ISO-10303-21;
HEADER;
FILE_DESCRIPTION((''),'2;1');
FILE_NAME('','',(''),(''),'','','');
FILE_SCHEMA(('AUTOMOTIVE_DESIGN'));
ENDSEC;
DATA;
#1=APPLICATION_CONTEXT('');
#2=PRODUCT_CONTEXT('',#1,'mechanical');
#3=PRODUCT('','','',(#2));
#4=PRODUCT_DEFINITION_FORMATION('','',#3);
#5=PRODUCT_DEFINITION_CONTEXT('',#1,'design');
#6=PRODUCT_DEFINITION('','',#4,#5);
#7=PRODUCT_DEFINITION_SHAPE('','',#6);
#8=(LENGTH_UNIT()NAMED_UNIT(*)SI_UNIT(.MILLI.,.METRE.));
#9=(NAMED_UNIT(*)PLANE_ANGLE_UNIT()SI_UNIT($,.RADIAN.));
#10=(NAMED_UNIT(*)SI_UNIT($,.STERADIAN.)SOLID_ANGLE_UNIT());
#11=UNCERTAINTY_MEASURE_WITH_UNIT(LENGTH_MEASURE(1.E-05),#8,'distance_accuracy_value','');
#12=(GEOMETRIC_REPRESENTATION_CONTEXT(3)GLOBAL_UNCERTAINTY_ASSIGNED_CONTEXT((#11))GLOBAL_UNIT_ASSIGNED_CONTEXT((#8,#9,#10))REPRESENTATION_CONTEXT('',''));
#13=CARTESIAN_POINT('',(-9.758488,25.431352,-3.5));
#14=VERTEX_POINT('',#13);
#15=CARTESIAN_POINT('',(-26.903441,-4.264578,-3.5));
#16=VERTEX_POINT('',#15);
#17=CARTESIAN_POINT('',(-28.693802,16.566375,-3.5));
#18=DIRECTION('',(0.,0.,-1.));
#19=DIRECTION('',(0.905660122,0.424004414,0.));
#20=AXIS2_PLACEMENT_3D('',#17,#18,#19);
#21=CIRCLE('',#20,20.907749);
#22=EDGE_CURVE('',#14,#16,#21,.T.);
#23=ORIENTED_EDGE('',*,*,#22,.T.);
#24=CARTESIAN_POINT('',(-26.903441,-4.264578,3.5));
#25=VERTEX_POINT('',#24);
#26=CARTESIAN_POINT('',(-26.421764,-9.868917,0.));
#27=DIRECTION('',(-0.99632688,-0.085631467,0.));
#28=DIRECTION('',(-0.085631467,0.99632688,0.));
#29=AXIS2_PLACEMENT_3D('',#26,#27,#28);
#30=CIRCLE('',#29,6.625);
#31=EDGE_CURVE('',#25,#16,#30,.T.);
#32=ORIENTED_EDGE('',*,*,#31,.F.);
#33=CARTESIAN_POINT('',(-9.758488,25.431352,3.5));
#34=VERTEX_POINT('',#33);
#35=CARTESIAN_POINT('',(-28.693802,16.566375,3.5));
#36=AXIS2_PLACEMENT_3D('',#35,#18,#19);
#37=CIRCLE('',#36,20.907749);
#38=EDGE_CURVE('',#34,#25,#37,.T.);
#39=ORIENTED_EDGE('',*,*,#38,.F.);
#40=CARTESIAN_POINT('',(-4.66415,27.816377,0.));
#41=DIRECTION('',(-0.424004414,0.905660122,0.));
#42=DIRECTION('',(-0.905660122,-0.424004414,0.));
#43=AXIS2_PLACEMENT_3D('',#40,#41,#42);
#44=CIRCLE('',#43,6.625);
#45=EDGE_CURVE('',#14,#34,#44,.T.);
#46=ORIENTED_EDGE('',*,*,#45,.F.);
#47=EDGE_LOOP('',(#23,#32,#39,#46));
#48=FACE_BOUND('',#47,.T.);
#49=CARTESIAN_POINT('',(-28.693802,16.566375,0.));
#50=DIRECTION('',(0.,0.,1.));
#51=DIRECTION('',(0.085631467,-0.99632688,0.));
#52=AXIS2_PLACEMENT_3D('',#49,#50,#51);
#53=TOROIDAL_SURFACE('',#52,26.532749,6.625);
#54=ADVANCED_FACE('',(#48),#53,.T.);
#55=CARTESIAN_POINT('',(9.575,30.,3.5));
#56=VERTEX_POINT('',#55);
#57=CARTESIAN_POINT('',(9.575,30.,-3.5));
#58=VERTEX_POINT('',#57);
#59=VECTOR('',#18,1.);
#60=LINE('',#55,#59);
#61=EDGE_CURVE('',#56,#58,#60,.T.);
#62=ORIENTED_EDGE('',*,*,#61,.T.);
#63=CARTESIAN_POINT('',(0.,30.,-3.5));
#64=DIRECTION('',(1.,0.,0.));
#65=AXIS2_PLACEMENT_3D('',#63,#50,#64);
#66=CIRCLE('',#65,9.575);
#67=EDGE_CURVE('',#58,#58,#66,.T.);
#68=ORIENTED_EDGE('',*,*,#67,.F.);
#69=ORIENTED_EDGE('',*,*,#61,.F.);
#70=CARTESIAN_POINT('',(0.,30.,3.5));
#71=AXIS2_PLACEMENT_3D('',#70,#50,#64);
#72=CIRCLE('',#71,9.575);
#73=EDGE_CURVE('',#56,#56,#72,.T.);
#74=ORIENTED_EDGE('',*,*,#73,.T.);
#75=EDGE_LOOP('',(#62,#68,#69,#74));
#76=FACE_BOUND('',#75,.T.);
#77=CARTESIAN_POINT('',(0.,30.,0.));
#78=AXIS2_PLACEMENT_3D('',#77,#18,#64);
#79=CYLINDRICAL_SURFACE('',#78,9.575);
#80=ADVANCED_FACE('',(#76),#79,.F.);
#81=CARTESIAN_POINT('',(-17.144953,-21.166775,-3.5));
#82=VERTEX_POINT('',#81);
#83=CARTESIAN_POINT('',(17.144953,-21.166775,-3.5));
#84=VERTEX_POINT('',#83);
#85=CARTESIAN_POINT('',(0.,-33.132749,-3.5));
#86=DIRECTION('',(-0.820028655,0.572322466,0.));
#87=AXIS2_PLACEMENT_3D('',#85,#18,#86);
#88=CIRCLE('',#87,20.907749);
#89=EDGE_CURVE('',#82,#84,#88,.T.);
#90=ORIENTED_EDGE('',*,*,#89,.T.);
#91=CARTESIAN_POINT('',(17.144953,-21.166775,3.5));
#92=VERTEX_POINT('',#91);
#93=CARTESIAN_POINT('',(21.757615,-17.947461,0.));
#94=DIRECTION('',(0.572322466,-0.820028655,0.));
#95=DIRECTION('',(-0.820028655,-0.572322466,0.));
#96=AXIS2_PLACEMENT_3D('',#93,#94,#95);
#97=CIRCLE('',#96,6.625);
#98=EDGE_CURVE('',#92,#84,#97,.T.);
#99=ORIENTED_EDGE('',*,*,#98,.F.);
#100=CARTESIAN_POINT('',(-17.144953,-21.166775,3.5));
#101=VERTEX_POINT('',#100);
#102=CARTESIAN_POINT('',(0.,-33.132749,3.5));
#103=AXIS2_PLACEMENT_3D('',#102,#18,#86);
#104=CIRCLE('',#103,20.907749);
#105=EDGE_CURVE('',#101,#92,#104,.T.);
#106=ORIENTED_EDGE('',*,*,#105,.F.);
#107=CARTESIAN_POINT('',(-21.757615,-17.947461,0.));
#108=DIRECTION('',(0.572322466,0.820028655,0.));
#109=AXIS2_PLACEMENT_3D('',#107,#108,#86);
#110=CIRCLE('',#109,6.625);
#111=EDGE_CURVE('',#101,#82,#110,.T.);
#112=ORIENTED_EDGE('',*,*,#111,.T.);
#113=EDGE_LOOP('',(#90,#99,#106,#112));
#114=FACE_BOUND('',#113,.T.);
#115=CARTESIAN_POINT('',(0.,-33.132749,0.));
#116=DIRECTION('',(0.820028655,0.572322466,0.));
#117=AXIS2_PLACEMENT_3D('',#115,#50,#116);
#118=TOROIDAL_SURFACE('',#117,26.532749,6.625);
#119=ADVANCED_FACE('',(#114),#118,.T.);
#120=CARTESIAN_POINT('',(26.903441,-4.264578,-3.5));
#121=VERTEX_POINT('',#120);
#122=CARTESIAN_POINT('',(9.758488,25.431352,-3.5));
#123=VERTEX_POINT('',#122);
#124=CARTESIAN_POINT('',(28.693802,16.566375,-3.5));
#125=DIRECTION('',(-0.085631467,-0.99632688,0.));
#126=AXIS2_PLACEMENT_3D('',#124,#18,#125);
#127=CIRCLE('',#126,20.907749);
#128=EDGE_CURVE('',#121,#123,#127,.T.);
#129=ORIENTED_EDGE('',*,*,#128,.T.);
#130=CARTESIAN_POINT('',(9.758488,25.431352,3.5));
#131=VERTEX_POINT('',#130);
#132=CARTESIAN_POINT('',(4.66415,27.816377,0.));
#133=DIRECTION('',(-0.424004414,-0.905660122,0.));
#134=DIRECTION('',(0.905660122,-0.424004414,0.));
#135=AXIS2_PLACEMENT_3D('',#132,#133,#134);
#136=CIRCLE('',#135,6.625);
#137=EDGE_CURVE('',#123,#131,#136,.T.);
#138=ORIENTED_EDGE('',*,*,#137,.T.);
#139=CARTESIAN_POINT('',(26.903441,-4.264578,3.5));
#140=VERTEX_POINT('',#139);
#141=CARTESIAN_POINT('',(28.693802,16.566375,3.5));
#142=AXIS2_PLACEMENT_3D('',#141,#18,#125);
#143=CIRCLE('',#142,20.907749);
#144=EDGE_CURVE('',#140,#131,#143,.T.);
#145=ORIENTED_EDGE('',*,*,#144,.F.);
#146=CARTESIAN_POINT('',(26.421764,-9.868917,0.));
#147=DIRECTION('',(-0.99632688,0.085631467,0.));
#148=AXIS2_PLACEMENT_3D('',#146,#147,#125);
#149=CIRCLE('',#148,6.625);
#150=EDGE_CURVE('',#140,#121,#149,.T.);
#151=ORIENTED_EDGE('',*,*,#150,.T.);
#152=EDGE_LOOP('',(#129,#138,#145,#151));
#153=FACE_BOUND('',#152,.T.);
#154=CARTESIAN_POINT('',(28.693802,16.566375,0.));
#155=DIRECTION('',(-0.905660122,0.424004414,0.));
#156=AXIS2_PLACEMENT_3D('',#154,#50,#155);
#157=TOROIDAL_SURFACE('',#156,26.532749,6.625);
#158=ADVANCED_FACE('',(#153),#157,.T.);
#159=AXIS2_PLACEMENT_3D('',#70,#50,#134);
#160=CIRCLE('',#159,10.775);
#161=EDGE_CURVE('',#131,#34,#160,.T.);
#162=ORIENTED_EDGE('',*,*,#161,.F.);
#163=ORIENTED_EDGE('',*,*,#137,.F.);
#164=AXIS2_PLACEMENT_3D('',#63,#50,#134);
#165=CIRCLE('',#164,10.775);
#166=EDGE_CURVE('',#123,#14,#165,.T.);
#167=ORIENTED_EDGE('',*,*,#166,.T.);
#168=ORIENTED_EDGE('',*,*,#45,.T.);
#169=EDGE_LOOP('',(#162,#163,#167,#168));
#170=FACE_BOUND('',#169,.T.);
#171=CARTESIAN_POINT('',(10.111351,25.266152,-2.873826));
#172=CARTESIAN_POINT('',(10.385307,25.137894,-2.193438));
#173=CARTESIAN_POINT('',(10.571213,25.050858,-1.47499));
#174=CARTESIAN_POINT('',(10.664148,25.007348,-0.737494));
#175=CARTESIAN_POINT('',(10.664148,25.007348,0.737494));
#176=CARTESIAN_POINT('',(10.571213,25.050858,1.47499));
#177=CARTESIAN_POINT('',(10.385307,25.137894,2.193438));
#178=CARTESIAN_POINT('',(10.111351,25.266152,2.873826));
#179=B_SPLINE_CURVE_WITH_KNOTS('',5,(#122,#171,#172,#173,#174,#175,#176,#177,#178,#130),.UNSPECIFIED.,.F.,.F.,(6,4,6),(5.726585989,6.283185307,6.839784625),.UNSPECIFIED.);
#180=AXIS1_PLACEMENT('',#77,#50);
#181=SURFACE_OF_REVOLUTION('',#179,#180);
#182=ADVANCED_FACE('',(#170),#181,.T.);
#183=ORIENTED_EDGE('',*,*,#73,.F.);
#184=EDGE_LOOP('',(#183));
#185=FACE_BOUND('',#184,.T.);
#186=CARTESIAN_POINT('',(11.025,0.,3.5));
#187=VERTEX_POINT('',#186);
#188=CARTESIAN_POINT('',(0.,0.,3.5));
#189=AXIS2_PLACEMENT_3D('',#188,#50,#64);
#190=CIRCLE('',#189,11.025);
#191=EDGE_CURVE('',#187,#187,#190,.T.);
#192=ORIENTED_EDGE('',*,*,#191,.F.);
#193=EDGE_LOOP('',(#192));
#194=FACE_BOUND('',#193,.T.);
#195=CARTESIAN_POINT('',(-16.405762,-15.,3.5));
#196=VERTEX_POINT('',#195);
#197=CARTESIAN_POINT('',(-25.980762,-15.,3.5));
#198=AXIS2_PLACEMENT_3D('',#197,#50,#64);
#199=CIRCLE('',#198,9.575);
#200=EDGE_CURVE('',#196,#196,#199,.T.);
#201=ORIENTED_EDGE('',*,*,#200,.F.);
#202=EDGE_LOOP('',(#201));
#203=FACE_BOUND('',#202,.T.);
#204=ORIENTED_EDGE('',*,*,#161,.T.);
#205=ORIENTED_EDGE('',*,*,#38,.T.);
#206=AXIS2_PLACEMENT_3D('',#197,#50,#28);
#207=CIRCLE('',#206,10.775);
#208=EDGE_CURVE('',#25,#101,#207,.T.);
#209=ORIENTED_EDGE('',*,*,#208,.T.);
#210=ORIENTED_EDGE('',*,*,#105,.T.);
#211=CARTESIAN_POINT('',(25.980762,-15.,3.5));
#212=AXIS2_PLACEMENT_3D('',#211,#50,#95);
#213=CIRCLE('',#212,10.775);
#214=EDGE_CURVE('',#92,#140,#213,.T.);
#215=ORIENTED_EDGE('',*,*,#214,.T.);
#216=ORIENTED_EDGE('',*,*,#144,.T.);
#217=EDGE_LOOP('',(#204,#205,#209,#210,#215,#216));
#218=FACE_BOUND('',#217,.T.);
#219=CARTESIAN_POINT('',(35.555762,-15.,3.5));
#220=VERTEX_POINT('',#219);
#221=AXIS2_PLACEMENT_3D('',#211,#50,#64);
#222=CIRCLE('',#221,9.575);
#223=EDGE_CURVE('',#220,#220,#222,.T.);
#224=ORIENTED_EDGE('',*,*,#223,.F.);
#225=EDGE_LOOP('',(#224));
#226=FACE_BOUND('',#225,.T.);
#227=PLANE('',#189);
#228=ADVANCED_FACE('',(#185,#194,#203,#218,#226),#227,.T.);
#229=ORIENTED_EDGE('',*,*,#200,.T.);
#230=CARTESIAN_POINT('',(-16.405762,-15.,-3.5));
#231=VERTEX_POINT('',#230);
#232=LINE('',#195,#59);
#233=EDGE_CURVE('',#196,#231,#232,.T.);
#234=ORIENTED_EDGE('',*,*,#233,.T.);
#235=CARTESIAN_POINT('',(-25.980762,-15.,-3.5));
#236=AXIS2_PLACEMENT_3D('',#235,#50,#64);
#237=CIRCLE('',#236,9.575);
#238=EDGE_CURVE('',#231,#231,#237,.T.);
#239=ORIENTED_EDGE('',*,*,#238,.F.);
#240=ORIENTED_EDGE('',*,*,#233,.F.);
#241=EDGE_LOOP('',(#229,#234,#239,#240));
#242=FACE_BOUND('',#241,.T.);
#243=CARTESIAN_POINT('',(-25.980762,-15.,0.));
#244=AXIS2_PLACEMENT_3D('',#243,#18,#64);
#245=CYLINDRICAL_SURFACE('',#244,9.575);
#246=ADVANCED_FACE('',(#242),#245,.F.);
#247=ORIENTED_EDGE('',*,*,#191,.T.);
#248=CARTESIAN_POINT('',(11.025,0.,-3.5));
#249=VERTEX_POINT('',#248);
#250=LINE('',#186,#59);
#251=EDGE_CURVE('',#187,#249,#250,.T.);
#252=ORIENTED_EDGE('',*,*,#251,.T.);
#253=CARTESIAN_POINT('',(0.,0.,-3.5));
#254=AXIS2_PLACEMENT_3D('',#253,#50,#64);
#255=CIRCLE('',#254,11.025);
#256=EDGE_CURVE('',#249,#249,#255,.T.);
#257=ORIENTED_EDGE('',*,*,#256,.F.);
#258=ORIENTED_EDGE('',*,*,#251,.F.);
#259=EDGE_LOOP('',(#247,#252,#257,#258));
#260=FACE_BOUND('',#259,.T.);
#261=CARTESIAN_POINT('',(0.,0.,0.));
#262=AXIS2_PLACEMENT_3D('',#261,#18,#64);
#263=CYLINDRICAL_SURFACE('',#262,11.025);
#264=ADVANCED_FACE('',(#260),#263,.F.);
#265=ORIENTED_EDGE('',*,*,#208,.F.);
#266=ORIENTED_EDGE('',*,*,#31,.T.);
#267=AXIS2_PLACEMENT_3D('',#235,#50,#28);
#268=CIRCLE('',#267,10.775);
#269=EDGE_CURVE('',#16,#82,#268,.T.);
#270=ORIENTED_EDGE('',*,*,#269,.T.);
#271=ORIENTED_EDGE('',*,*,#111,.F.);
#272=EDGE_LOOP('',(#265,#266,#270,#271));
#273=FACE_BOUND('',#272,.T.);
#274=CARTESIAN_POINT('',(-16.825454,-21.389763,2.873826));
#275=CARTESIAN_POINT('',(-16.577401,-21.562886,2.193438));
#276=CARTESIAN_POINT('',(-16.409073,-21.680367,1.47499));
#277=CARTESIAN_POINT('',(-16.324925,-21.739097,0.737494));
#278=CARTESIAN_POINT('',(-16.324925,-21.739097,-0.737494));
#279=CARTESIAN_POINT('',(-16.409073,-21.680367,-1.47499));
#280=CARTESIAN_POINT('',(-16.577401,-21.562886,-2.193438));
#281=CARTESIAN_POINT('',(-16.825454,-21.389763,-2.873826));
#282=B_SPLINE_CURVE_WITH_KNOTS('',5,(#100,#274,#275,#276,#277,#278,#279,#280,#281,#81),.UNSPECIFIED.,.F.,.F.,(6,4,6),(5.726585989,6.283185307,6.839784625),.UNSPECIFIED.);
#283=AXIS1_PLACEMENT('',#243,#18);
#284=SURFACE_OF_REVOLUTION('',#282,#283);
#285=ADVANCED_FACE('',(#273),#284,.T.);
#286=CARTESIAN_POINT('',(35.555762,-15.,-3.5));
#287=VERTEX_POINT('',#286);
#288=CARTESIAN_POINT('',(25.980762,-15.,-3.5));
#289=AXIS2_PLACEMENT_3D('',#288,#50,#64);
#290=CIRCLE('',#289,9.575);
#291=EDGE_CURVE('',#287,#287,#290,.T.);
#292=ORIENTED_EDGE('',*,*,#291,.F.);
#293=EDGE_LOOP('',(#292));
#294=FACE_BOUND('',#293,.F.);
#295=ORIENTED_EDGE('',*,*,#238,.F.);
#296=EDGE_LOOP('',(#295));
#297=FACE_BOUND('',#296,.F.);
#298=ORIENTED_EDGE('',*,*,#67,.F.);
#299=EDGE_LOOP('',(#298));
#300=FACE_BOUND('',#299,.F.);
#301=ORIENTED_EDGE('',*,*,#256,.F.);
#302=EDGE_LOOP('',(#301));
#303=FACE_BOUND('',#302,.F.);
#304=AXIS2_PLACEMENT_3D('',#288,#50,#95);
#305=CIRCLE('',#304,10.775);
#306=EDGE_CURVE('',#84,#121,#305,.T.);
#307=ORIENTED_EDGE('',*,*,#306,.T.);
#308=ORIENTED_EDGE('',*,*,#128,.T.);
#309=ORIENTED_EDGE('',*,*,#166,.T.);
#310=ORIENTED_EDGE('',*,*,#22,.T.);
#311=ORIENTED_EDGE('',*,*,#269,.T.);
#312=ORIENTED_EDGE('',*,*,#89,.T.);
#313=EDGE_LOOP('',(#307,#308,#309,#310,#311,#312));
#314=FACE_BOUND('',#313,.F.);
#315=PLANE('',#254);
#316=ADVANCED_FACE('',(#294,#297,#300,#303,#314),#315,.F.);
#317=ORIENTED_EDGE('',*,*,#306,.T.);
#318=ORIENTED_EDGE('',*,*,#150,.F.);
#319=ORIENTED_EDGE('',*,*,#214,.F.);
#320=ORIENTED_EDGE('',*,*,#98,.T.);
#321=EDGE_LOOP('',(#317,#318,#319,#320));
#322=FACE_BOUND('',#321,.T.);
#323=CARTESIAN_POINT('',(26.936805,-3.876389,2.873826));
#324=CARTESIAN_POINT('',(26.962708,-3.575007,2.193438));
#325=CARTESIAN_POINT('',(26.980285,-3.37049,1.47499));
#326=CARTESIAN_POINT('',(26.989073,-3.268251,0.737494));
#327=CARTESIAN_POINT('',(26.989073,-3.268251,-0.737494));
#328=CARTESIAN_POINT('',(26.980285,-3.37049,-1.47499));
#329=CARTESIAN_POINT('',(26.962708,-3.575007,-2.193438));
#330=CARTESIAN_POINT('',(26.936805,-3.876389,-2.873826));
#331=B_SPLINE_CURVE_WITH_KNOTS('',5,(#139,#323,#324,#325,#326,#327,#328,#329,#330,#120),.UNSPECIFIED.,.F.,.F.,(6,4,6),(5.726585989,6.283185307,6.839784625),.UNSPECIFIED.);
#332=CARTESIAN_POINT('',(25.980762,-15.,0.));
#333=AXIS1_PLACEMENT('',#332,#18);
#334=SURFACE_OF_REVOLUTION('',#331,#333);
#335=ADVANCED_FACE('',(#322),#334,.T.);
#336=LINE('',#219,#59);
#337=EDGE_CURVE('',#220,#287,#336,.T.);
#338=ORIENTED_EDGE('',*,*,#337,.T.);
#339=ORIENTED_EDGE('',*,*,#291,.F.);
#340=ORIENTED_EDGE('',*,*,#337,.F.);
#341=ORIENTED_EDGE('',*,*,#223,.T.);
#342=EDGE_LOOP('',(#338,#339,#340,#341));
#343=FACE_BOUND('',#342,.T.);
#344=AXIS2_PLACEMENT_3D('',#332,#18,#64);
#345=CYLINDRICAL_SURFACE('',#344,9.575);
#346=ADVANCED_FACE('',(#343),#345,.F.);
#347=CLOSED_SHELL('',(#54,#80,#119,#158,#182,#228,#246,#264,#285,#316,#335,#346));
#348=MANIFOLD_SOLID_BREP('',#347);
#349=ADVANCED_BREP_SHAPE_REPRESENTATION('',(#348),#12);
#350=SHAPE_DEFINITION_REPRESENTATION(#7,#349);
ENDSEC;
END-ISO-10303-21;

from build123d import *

# Parameters (mm, degrees)
F0_R     = 9.575
F0_R_2   = 11.025
F1_DEPTH = 3.5


# Not quite as in the source:
# - a feature names something its author has since deleted; it is built from what else it names


with BuildPart() as f1:
    # F0 (on Top) → F1 (new body, symmetric)
    with BuildSketch(Plane.XY):
        with BuildLine():
            ThreePointArc((-9.7584878157, 25.4313524375), (-10.5871605613, 6.1125), (-26.9034411714, -4.2645778678))
            ThreePointArc((-26.9034411714, -4.2645778678), (-35.3121858393, -20.3875), (-17.1449533556, -21.1667745697))
            ThreePointArc((-17.1449533556, -21.1667745697), (0, -12.225), (17.1449533556, -21.1667745697))
            ThreePointArc((17.1449533556, -21.1667745697), (35.3121858393, -20.3875), (26.9034411714, -4.2645778678))
            ThreePointArc((26.9034411714, -4.2645778678), (10.5871605613, 6.1125), (9.7584878157, 25.4313524375))
            ThreePointArc((9.7584878157, 25.4313524375), (0, 40.775), (-9.7584878157, 25.4313524375))
        make_face()
        with Locations((-25.9807621135, -15)):
            Circle(F0_R, mode=Mode.SUBTRACT)
        Circle(F0_R_2, mode=Mode.SUBTRACT)
        with Locations((25.9807621135, -15)):
            Circle(F0_R, mode=Mode.SUBTRACT)
        with Locations((0, 30)):
            Circle(F0_R, mode=Mode.SUBTRACT)
    extrude(amount=F1_DEPTH, both=True)

    # F4: sweep along a path in F0
    with BuildLine(Plane.XY) as f4_path:
        ThreePointArc((9.7584878157, 25.4313524375), (0, 40.775), (-9.7584878157, 25.4313524375))
    # F3 (on line) → F4 (sweep)
    with BuildSketch(Plane(origin=(11.5201166848, 24.6066077034, 0), x_dir=(-0.9056601221, 0.4240044141, 0), z_dir=(0.4240044141, 0.9056601221, 0))):
        with BuildLine():
            ThreePointArc((1.9451324245, 3.5), (0.9451324245, 0), (1.9451324245, -3.5))
            Line((1.9451324245, -3.5), (1.9451324245, 3.5))
        make_face()
    sweep(path=f4_path.line)

    # F5: sweep along a path in F0
    with BuildLine(Plane.XY) as f5_path:
        ThreePointArc((9.7584878157, 25.4313524375), (10.5871605613, 6.1125), (26.9034411714, -4.2645778678))
        ThreePointArc((26.9034411714, -4.2645778678), (35.3121858393, -20.3875), (17.1449533556, -21.1667745697))
        ThreePointArc((17.1449533556, -21.1667745697), (0, -12.225), (-17.1449533556, -21.1667745697))
        ThreePointArc((-17.1449533556, -21.1667745697), (-35.3121858393, -20.3875), (-26.9034411714, -4.2645778678))
        ThreePointArc((-26.9034411714, -4.2645778678), (-10.5871605613, 6.1125), (-9.7584878157, 25.4313524375))
    # F4_face (on face) → F5 (sweep)
    with BuildSketch(Plane(origin=(10.1232025909, 25.2606033113, 0), x_dir=(0.9056601221, -0.4240044141, 0), z_dir=(-0.4240044141, -0.9056601221, 0))):
        with BuildLine():
            ThreePointArc((-0.402706011, -3.5), (0.597293989, 0), (-0.402706011, 3.5))
            Line((-0.402706011, 3.5), (-0.402706011, -3.5))
        make_face()
    sweep(path=f5_path.line)


solid = f1.part
